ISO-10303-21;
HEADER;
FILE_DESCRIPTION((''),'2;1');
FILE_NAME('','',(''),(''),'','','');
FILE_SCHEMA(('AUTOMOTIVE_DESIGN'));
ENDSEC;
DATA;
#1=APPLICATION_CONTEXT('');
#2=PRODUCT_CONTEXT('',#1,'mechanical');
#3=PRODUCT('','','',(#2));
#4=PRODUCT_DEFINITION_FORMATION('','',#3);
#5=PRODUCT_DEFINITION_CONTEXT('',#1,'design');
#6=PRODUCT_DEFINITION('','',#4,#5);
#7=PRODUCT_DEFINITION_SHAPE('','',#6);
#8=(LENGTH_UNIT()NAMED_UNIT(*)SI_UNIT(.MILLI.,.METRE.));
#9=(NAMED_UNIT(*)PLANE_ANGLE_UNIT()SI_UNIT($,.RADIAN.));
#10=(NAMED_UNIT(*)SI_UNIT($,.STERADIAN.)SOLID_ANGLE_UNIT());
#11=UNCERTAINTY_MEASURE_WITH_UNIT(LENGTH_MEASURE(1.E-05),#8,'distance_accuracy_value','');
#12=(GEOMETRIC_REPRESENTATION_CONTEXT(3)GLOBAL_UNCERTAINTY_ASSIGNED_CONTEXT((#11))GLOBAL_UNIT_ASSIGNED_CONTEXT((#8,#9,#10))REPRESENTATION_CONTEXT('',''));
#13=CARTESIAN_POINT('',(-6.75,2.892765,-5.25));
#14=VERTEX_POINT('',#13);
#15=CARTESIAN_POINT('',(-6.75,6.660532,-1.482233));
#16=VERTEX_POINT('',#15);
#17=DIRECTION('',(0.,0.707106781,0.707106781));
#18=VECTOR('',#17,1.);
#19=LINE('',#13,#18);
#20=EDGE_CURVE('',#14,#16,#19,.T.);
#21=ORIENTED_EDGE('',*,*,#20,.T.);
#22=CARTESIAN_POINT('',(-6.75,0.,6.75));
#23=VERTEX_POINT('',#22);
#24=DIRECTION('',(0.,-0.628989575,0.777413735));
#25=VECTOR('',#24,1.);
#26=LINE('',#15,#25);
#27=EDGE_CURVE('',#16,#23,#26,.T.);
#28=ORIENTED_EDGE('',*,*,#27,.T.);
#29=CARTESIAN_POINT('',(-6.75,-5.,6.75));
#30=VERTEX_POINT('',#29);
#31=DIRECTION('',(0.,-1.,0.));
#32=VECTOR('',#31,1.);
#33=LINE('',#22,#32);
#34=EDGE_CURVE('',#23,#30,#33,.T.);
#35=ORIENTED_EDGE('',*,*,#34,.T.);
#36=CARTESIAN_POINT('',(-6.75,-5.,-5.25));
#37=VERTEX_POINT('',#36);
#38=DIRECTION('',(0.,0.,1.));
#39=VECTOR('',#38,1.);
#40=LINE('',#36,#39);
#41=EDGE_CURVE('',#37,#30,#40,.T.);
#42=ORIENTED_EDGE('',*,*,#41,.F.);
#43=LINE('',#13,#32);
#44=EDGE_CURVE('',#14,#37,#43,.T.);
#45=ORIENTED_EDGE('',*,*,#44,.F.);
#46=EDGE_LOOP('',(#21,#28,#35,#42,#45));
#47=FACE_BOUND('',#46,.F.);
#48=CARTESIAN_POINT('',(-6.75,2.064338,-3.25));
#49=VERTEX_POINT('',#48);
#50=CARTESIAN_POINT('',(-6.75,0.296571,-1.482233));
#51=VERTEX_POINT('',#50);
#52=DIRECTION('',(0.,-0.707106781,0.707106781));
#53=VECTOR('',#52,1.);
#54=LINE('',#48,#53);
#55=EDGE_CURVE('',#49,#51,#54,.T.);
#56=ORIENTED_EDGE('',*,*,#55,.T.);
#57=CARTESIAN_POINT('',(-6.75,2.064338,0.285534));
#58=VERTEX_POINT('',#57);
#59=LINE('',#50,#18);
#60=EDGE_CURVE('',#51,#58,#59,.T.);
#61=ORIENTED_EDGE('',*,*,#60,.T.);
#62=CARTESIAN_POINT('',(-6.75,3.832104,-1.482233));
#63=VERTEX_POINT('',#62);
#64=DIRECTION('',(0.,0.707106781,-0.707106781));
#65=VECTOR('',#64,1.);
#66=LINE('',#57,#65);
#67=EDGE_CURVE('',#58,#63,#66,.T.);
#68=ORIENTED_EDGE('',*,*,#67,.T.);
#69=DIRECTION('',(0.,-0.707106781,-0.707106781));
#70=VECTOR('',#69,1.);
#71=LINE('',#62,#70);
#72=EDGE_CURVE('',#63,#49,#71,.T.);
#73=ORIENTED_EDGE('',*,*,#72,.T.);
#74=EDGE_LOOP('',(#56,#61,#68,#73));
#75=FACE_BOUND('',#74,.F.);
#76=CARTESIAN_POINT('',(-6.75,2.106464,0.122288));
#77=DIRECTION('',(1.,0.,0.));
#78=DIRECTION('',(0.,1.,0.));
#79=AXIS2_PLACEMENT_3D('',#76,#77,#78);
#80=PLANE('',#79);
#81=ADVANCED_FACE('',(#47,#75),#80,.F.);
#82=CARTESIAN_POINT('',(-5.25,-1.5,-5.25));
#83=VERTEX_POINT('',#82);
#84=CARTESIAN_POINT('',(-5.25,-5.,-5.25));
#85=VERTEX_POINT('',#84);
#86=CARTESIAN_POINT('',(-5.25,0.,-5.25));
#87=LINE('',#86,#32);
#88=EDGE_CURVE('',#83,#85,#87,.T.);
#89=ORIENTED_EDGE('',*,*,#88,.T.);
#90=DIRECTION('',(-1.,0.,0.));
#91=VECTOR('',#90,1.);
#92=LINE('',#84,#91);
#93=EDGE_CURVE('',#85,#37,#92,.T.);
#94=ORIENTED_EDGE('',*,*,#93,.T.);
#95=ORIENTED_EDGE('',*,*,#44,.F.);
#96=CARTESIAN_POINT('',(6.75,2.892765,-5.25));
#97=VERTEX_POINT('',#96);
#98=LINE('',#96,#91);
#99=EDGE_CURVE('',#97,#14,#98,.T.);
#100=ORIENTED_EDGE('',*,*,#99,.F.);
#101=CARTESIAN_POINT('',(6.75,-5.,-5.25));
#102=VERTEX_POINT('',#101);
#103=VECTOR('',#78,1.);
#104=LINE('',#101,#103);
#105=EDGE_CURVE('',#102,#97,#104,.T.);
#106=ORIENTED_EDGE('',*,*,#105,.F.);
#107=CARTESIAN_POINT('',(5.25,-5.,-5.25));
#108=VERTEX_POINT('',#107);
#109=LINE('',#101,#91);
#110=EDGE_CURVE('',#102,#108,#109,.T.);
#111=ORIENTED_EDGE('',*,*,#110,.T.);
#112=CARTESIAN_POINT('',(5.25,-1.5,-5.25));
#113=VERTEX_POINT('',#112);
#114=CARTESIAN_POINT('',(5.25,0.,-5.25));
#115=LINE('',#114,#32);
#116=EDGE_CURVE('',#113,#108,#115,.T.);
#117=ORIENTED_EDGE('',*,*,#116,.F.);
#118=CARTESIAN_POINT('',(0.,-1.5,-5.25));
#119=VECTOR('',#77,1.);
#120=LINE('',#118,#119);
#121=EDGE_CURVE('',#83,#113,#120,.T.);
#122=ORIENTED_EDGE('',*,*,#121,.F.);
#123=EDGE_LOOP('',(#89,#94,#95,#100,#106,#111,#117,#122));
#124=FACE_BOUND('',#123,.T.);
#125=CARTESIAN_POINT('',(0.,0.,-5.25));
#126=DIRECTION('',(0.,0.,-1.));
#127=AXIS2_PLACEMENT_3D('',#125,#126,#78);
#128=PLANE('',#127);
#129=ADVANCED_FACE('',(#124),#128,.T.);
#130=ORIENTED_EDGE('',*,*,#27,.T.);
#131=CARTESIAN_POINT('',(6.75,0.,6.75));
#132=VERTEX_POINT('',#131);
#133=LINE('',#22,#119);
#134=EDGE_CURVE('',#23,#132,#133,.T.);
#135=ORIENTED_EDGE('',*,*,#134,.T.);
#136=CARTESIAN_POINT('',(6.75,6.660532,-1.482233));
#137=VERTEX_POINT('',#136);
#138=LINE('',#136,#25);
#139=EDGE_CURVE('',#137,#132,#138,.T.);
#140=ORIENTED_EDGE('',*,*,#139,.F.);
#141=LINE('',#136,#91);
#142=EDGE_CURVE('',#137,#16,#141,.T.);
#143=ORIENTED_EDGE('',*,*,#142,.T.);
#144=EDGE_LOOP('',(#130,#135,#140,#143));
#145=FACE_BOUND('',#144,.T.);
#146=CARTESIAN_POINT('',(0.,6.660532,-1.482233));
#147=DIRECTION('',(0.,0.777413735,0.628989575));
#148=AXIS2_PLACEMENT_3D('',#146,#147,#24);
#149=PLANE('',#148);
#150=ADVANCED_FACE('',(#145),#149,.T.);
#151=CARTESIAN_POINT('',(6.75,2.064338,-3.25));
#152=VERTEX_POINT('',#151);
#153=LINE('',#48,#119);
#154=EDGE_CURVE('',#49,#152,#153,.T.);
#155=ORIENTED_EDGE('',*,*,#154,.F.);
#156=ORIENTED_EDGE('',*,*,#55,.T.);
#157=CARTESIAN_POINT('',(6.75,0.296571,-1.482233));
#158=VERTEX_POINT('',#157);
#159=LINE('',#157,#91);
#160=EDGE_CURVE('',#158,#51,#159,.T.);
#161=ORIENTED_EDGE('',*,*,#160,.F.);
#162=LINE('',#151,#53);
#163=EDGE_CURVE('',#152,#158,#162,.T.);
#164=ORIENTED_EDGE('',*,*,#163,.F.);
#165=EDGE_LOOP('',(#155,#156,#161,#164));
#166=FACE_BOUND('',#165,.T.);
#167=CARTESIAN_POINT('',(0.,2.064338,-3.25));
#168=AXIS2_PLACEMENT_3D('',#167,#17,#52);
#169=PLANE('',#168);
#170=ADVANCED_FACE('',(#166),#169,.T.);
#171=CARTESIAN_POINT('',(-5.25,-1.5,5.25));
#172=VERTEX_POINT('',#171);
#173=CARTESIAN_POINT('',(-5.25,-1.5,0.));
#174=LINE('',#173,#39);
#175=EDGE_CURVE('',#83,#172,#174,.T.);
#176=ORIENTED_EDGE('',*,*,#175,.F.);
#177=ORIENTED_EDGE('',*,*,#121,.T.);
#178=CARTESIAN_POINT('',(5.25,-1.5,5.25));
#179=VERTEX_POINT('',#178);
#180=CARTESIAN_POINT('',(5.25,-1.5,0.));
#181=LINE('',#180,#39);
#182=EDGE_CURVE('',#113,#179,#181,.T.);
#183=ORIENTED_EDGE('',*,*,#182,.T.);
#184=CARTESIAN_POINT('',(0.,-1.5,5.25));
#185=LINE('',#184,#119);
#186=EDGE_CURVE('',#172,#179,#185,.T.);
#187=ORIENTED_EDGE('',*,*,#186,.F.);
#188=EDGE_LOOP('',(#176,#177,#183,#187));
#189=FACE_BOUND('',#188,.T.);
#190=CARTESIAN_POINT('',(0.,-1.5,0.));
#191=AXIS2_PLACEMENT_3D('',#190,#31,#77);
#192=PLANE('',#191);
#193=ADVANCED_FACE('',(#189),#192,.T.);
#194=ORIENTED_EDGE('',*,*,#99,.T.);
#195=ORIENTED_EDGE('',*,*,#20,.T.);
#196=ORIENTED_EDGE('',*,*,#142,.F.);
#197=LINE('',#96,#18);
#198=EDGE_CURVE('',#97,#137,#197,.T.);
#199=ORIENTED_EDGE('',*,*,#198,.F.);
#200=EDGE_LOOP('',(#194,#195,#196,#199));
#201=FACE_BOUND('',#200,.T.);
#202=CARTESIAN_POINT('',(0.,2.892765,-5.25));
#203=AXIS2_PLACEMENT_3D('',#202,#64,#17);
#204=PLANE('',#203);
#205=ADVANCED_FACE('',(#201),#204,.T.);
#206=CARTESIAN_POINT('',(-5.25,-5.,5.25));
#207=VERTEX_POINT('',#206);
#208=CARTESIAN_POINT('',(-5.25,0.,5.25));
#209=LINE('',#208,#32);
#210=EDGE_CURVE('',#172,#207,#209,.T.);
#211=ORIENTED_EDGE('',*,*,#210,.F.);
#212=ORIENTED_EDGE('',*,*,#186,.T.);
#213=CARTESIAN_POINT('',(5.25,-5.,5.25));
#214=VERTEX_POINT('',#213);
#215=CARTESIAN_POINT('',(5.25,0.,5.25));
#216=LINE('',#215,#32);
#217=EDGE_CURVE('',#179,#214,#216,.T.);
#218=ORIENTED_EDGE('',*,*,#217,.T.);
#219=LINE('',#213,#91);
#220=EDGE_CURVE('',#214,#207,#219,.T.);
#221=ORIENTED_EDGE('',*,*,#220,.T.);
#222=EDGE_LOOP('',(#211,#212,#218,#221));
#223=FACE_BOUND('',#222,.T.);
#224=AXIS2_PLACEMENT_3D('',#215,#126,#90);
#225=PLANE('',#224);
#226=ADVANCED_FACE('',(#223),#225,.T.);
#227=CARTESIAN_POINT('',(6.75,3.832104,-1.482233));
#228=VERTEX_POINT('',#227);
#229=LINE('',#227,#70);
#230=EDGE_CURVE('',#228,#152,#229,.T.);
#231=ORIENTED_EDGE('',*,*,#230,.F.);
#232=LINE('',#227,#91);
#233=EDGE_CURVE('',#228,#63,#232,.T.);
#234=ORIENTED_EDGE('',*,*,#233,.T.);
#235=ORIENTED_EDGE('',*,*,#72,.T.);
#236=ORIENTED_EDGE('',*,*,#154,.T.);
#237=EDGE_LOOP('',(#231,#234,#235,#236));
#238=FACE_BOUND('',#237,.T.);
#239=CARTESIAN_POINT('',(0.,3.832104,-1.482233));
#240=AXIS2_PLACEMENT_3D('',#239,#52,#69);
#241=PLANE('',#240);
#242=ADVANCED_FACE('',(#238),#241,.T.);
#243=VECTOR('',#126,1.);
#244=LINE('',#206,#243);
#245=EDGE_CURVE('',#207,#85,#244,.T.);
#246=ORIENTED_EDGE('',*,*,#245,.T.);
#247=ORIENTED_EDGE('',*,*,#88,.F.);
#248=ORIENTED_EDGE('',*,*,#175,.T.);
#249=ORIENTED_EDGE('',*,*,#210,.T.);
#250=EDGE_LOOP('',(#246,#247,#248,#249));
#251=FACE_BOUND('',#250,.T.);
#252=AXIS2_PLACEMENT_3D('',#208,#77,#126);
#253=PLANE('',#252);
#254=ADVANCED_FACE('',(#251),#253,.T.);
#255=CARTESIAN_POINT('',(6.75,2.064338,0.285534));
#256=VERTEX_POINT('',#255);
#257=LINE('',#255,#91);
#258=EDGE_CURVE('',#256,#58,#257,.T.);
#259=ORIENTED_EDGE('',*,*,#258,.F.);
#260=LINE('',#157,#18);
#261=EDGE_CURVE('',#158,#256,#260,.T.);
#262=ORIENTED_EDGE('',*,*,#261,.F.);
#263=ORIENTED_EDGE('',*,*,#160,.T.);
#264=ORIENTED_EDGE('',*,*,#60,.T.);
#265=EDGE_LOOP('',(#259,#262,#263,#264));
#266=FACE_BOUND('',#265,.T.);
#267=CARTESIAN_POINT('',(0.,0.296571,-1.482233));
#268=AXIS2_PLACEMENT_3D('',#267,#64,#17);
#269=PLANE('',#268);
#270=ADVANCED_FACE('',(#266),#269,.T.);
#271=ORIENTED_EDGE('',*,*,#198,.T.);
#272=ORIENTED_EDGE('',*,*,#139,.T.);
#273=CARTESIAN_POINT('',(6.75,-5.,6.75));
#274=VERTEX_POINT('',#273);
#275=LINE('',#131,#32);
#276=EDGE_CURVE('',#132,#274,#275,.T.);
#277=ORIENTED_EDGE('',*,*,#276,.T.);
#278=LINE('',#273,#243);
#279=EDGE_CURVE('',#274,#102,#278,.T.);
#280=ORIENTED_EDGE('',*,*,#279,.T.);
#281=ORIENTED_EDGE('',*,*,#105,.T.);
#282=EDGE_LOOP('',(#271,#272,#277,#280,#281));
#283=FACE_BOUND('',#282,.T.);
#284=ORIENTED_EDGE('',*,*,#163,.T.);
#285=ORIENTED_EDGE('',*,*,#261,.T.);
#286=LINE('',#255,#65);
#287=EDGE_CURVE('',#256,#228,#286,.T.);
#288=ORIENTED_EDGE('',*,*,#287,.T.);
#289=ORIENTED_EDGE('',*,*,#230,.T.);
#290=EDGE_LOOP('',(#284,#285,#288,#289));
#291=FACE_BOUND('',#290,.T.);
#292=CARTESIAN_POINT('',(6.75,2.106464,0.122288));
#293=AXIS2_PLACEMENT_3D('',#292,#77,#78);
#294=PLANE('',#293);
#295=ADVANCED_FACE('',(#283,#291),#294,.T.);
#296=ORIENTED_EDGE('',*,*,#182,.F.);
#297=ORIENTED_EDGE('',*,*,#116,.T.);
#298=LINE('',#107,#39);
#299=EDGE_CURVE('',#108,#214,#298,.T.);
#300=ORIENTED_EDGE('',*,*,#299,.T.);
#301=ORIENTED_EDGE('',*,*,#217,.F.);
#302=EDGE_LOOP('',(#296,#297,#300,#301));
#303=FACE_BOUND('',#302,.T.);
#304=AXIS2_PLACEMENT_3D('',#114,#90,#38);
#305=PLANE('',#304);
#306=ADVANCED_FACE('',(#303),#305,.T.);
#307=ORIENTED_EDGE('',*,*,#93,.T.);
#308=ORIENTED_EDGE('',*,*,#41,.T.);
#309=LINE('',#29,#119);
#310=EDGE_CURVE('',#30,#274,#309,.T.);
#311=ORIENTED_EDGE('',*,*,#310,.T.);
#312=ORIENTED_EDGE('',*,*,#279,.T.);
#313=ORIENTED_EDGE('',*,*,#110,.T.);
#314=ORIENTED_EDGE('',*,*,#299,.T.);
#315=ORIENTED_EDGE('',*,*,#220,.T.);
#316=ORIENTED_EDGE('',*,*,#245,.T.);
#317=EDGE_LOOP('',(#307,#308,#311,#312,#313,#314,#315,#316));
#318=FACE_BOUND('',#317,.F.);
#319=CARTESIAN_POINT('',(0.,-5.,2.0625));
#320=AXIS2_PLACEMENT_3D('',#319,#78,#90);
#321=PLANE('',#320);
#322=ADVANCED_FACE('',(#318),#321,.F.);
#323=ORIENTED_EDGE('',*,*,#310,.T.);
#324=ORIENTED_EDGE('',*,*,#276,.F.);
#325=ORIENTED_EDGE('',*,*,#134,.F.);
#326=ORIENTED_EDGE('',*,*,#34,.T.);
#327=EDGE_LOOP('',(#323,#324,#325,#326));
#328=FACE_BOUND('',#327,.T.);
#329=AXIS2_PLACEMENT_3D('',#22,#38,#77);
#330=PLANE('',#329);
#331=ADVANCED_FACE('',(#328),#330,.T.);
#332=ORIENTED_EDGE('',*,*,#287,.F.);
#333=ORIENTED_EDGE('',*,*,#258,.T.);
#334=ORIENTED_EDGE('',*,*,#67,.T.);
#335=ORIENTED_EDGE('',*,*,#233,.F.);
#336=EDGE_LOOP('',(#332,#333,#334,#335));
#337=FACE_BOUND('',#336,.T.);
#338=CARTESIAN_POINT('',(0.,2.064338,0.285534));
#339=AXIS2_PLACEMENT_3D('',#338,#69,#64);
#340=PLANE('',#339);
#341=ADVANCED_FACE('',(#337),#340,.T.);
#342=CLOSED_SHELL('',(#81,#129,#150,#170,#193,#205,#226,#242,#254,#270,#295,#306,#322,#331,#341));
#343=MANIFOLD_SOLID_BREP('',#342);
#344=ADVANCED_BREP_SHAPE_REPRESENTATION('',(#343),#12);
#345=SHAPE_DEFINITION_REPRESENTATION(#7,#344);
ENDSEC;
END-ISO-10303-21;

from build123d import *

# Parameters (mm, degrees)
F0_W          = 10.5
F0_H          = 10.5
F1_DEPTH      = 1.5
F3_DEPTH      = 5
F5_DEPTH      = 6.75
F5_DEPTH_BACK = 6.75


# Not quite as in the source:
# - an extrude ends at something that could not be found from the text; its depth is read off the source's solid


with BuildPart() as f1:
    # F0 (on Front) → F1 (new body)
    with BuildSketch(Plane.XZ):
        Rectangle(F0_W, F0_H)
    extrude(amount=F1_DEPTH)

    # F2 (on face) → F3 (join)
    with BuildSketch(Plane(origin=(0, 0, 0), x_dir=(-1, 0, 0), z_dir=(0, 1, 0))):
        Polygon((-6.75, -5.25), (-5.25, -5.25), (-5.25, 5.25), (5.25, 5.25), (5.25, -5.25), (6.75, -5.25), (6.75, 6.75), (-6.75, 6.75), align=None)
    extrude(amount=-F3_DEPTH)

    # F4 (on Right) → F5 (join, two sides)
    with BuildSketch(Plane.YZ) as f5_sk:
        Polygon((0, 6.75), (0, -5.25), (2.8927646712, -5.25), (6.6605316242, -1.482233047), align=None)
        Polygon((2.0643375465, -3.25), (0.2965705935, -1.482233047), (2.0643375465, 0.2855339059), (3.8321044994, -1.482233047), align=None, mode=Mode.SUBTRACT)
    extrude(amount=F5_DEPTH)
    extrude(f5_sk.sketch, amount=-F5_DEPTH_BACK)


solid = f1.part
